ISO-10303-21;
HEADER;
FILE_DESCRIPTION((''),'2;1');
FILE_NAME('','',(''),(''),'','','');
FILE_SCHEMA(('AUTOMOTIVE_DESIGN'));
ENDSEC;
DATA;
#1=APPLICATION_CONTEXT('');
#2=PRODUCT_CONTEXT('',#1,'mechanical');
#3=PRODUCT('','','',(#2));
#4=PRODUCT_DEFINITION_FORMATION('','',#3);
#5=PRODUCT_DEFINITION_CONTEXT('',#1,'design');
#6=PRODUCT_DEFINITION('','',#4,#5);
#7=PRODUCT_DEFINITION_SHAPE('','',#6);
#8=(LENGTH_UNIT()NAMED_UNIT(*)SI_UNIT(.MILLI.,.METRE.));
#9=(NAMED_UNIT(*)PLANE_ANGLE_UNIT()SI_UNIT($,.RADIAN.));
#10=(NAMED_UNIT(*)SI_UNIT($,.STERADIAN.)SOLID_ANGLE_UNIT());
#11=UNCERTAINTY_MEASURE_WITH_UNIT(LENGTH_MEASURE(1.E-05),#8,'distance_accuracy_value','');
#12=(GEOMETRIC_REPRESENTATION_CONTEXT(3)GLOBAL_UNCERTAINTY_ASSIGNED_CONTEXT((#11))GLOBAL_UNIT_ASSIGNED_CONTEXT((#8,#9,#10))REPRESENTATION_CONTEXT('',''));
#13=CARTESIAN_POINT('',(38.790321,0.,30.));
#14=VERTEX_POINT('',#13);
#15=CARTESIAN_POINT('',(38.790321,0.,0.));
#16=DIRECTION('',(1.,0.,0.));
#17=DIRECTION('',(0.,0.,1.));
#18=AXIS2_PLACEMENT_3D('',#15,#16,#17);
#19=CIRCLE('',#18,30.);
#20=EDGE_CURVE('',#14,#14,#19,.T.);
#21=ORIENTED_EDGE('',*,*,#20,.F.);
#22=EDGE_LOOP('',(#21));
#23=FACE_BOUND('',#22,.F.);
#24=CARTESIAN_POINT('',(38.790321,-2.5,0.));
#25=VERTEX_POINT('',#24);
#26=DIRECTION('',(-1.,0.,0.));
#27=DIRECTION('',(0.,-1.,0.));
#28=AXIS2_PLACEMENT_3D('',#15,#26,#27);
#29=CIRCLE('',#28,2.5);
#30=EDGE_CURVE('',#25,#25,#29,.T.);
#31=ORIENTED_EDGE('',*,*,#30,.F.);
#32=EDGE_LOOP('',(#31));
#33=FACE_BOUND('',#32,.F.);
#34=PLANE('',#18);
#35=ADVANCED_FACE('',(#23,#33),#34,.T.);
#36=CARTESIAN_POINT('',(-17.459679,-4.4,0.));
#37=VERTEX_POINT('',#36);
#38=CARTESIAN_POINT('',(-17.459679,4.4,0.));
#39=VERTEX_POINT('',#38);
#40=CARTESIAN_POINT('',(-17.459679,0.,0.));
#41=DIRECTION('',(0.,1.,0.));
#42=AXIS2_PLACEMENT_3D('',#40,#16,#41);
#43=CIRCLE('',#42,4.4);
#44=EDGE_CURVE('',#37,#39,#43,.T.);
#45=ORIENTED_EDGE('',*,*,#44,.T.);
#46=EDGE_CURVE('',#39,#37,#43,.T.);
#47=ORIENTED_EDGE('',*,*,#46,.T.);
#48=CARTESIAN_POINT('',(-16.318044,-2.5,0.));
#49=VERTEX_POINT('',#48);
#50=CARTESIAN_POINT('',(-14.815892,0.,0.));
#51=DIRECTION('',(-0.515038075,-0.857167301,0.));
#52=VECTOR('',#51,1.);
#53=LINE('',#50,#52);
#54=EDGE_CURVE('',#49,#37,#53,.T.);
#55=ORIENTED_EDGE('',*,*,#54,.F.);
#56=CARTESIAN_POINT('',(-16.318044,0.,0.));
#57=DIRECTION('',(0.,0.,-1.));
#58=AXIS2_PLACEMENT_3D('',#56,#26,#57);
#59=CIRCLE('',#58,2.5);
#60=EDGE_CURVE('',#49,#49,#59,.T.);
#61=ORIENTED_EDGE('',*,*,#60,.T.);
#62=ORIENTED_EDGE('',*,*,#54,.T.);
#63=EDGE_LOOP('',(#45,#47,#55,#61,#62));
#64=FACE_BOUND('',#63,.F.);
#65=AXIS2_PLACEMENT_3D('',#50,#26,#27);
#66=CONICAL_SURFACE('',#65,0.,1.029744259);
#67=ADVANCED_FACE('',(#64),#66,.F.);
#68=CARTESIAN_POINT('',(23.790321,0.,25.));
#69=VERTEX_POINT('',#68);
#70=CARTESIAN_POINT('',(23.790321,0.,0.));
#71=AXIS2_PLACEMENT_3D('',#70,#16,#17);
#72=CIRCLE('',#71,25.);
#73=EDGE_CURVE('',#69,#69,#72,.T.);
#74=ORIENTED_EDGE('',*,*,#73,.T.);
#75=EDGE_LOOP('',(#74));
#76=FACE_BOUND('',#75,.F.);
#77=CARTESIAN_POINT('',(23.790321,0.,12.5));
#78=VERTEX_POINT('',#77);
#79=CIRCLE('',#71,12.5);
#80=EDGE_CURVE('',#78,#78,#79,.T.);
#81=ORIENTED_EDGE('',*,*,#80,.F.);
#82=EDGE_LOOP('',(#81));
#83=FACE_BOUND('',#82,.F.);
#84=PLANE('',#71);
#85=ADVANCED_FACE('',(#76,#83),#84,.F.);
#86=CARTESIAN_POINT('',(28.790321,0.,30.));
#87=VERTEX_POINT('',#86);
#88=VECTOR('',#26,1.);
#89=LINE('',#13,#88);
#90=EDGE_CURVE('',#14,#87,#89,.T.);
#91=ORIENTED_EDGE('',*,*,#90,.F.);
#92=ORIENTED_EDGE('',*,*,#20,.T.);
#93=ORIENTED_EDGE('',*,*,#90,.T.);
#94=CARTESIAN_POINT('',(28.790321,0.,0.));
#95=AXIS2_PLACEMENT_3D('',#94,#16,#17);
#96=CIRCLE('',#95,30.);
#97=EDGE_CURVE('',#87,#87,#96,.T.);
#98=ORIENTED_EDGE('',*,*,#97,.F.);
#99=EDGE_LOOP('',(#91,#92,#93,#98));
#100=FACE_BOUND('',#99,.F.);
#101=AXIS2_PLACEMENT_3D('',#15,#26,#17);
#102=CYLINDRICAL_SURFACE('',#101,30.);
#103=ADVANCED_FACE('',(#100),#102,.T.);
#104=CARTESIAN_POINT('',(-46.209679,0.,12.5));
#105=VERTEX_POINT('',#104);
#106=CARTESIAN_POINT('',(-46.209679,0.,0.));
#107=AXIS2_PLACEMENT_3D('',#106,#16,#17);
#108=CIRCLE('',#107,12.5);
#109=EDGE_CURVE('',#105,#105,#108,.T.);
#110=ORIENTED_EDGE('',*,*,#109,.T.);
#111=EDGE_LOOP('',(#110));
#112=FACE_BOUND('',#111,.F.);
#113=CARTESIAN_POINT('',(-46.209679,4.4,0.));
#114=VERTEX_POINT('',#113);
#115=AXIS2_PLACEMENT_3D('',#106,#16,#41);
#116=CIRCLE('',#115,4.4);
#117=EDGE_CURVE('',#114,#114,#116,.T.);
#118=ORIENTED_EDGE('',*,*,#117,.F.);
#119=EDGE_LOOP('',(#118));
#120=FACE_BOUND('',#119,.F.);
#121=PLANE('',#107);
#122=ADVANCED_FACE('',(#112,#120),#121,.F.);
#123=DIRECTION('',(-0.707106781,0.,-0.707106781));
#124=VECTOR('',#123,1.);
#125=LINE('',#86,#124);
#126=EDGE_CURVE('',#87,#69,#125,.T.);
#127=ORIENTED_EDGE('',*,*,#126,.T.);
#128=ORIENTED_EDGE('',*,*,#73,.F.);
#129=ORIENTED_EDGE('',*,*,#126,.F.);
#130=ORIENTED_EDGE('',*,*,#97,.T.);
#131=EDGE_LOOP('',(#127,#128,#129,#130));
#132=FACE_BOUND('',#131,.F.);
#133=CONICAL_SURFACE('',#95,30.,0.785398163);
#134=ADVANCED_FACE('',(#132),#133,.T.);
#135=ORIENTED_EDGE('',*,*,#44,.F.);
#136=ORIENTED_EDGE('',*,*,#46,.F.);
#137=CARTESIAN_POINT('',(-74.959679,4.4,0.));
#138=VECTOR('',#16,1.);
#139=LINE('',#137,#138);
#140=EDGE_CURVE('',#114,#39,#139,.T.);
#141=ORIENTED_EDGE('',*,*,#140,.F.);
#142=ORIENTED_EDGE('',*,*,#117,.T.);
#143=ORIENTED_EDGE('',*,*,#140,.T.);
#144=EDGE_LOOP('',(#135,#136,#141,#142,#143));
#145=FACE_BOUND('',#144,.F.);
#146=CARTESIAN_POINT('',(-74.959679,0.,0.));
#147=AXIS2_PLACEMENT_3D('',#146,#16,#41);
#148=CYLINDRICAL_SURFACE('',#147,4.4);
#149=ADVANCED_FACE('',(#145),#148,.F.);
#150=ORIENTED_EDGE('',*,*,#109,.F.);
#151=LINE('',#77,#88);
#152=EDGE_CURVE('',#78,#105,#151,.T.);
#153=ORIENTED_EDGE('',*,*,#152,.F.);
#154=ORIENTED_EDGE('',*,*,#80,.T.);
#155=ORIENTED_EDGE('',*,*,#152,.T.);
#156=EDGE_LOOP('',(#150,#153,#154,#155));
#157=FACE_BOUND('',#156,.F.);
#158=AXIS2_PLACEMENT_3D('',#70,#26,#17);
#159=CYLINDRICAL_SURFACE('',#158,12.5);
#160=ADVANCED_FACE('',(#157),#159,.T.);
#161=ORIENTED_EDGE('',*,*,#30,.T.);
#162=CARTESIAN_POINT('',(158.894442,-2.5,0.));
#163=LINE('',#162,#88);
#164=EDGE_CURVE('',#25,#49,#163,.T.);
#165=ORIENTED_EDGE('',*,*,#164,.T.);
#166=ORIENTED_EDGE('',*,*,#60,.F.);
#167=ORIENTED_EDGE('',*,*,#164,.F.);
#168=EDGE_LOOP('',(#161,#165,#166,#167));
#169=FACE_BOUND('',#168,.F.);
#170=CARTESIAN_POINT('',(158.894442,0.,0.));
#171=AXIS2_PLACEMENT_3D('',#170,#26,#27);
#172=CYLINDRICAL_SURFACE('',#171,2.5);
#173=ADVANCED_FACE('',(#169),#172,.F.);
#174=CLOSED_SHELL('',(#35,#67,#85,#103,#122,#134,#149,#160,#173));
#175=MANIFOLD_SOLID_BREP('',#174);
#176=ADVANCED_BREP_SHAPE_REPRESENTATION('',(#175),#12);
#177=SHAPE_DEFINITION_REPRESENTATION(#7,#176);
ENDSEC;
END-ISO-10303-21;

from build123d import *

# Parameters (mm, degrees)
F3_D     = 8.8
F3_DEPTH = 28.75
F3_TIP   = 2.6437867237
F5_D     = 5


# Not quite as in the source:
# - a feature names something its author has since deleted; it is built from what else it names


with BuildPart() as f1:
    # F0 (on Front) → F1 (revolve)
    with BuildSketch(Plane.XZ):
        Polygon((23.7903209624, 12.5), (-46.2096790376, 12.5), (-46.2096790376, 0), (38.7903209624, 0), (38.7903209624, 30), (28.7903209624, 30), (23.7903209624, 25), align=None)
    revolve(axis=Axis((-0.8820928633, 0, 0), (1, 0, 0)))

    # F3
    with Locations(Plane(origin=(-46.2096790376, 0, 0), x_dir=(0, -1, 0), z_dir=(-1, 0, 0))):
        with Locations((0, 0)):
            Hole(F3_D / 2, depth=F3_DEPTH)
            with Locations((0, 0, -(F3_DEPTH + F3_TIP / 2))):  # 118° drill point
                Cone(0, F3_D / 2, F3_TIP, mode=Mode.SUBTRACT)

    # F5 (through all)
    with Locations(Plane.YZ.offset(38.7903209624)):
        with Locations((0, 0)):
            Hole(F5_D / 2)


solid = f1.part
